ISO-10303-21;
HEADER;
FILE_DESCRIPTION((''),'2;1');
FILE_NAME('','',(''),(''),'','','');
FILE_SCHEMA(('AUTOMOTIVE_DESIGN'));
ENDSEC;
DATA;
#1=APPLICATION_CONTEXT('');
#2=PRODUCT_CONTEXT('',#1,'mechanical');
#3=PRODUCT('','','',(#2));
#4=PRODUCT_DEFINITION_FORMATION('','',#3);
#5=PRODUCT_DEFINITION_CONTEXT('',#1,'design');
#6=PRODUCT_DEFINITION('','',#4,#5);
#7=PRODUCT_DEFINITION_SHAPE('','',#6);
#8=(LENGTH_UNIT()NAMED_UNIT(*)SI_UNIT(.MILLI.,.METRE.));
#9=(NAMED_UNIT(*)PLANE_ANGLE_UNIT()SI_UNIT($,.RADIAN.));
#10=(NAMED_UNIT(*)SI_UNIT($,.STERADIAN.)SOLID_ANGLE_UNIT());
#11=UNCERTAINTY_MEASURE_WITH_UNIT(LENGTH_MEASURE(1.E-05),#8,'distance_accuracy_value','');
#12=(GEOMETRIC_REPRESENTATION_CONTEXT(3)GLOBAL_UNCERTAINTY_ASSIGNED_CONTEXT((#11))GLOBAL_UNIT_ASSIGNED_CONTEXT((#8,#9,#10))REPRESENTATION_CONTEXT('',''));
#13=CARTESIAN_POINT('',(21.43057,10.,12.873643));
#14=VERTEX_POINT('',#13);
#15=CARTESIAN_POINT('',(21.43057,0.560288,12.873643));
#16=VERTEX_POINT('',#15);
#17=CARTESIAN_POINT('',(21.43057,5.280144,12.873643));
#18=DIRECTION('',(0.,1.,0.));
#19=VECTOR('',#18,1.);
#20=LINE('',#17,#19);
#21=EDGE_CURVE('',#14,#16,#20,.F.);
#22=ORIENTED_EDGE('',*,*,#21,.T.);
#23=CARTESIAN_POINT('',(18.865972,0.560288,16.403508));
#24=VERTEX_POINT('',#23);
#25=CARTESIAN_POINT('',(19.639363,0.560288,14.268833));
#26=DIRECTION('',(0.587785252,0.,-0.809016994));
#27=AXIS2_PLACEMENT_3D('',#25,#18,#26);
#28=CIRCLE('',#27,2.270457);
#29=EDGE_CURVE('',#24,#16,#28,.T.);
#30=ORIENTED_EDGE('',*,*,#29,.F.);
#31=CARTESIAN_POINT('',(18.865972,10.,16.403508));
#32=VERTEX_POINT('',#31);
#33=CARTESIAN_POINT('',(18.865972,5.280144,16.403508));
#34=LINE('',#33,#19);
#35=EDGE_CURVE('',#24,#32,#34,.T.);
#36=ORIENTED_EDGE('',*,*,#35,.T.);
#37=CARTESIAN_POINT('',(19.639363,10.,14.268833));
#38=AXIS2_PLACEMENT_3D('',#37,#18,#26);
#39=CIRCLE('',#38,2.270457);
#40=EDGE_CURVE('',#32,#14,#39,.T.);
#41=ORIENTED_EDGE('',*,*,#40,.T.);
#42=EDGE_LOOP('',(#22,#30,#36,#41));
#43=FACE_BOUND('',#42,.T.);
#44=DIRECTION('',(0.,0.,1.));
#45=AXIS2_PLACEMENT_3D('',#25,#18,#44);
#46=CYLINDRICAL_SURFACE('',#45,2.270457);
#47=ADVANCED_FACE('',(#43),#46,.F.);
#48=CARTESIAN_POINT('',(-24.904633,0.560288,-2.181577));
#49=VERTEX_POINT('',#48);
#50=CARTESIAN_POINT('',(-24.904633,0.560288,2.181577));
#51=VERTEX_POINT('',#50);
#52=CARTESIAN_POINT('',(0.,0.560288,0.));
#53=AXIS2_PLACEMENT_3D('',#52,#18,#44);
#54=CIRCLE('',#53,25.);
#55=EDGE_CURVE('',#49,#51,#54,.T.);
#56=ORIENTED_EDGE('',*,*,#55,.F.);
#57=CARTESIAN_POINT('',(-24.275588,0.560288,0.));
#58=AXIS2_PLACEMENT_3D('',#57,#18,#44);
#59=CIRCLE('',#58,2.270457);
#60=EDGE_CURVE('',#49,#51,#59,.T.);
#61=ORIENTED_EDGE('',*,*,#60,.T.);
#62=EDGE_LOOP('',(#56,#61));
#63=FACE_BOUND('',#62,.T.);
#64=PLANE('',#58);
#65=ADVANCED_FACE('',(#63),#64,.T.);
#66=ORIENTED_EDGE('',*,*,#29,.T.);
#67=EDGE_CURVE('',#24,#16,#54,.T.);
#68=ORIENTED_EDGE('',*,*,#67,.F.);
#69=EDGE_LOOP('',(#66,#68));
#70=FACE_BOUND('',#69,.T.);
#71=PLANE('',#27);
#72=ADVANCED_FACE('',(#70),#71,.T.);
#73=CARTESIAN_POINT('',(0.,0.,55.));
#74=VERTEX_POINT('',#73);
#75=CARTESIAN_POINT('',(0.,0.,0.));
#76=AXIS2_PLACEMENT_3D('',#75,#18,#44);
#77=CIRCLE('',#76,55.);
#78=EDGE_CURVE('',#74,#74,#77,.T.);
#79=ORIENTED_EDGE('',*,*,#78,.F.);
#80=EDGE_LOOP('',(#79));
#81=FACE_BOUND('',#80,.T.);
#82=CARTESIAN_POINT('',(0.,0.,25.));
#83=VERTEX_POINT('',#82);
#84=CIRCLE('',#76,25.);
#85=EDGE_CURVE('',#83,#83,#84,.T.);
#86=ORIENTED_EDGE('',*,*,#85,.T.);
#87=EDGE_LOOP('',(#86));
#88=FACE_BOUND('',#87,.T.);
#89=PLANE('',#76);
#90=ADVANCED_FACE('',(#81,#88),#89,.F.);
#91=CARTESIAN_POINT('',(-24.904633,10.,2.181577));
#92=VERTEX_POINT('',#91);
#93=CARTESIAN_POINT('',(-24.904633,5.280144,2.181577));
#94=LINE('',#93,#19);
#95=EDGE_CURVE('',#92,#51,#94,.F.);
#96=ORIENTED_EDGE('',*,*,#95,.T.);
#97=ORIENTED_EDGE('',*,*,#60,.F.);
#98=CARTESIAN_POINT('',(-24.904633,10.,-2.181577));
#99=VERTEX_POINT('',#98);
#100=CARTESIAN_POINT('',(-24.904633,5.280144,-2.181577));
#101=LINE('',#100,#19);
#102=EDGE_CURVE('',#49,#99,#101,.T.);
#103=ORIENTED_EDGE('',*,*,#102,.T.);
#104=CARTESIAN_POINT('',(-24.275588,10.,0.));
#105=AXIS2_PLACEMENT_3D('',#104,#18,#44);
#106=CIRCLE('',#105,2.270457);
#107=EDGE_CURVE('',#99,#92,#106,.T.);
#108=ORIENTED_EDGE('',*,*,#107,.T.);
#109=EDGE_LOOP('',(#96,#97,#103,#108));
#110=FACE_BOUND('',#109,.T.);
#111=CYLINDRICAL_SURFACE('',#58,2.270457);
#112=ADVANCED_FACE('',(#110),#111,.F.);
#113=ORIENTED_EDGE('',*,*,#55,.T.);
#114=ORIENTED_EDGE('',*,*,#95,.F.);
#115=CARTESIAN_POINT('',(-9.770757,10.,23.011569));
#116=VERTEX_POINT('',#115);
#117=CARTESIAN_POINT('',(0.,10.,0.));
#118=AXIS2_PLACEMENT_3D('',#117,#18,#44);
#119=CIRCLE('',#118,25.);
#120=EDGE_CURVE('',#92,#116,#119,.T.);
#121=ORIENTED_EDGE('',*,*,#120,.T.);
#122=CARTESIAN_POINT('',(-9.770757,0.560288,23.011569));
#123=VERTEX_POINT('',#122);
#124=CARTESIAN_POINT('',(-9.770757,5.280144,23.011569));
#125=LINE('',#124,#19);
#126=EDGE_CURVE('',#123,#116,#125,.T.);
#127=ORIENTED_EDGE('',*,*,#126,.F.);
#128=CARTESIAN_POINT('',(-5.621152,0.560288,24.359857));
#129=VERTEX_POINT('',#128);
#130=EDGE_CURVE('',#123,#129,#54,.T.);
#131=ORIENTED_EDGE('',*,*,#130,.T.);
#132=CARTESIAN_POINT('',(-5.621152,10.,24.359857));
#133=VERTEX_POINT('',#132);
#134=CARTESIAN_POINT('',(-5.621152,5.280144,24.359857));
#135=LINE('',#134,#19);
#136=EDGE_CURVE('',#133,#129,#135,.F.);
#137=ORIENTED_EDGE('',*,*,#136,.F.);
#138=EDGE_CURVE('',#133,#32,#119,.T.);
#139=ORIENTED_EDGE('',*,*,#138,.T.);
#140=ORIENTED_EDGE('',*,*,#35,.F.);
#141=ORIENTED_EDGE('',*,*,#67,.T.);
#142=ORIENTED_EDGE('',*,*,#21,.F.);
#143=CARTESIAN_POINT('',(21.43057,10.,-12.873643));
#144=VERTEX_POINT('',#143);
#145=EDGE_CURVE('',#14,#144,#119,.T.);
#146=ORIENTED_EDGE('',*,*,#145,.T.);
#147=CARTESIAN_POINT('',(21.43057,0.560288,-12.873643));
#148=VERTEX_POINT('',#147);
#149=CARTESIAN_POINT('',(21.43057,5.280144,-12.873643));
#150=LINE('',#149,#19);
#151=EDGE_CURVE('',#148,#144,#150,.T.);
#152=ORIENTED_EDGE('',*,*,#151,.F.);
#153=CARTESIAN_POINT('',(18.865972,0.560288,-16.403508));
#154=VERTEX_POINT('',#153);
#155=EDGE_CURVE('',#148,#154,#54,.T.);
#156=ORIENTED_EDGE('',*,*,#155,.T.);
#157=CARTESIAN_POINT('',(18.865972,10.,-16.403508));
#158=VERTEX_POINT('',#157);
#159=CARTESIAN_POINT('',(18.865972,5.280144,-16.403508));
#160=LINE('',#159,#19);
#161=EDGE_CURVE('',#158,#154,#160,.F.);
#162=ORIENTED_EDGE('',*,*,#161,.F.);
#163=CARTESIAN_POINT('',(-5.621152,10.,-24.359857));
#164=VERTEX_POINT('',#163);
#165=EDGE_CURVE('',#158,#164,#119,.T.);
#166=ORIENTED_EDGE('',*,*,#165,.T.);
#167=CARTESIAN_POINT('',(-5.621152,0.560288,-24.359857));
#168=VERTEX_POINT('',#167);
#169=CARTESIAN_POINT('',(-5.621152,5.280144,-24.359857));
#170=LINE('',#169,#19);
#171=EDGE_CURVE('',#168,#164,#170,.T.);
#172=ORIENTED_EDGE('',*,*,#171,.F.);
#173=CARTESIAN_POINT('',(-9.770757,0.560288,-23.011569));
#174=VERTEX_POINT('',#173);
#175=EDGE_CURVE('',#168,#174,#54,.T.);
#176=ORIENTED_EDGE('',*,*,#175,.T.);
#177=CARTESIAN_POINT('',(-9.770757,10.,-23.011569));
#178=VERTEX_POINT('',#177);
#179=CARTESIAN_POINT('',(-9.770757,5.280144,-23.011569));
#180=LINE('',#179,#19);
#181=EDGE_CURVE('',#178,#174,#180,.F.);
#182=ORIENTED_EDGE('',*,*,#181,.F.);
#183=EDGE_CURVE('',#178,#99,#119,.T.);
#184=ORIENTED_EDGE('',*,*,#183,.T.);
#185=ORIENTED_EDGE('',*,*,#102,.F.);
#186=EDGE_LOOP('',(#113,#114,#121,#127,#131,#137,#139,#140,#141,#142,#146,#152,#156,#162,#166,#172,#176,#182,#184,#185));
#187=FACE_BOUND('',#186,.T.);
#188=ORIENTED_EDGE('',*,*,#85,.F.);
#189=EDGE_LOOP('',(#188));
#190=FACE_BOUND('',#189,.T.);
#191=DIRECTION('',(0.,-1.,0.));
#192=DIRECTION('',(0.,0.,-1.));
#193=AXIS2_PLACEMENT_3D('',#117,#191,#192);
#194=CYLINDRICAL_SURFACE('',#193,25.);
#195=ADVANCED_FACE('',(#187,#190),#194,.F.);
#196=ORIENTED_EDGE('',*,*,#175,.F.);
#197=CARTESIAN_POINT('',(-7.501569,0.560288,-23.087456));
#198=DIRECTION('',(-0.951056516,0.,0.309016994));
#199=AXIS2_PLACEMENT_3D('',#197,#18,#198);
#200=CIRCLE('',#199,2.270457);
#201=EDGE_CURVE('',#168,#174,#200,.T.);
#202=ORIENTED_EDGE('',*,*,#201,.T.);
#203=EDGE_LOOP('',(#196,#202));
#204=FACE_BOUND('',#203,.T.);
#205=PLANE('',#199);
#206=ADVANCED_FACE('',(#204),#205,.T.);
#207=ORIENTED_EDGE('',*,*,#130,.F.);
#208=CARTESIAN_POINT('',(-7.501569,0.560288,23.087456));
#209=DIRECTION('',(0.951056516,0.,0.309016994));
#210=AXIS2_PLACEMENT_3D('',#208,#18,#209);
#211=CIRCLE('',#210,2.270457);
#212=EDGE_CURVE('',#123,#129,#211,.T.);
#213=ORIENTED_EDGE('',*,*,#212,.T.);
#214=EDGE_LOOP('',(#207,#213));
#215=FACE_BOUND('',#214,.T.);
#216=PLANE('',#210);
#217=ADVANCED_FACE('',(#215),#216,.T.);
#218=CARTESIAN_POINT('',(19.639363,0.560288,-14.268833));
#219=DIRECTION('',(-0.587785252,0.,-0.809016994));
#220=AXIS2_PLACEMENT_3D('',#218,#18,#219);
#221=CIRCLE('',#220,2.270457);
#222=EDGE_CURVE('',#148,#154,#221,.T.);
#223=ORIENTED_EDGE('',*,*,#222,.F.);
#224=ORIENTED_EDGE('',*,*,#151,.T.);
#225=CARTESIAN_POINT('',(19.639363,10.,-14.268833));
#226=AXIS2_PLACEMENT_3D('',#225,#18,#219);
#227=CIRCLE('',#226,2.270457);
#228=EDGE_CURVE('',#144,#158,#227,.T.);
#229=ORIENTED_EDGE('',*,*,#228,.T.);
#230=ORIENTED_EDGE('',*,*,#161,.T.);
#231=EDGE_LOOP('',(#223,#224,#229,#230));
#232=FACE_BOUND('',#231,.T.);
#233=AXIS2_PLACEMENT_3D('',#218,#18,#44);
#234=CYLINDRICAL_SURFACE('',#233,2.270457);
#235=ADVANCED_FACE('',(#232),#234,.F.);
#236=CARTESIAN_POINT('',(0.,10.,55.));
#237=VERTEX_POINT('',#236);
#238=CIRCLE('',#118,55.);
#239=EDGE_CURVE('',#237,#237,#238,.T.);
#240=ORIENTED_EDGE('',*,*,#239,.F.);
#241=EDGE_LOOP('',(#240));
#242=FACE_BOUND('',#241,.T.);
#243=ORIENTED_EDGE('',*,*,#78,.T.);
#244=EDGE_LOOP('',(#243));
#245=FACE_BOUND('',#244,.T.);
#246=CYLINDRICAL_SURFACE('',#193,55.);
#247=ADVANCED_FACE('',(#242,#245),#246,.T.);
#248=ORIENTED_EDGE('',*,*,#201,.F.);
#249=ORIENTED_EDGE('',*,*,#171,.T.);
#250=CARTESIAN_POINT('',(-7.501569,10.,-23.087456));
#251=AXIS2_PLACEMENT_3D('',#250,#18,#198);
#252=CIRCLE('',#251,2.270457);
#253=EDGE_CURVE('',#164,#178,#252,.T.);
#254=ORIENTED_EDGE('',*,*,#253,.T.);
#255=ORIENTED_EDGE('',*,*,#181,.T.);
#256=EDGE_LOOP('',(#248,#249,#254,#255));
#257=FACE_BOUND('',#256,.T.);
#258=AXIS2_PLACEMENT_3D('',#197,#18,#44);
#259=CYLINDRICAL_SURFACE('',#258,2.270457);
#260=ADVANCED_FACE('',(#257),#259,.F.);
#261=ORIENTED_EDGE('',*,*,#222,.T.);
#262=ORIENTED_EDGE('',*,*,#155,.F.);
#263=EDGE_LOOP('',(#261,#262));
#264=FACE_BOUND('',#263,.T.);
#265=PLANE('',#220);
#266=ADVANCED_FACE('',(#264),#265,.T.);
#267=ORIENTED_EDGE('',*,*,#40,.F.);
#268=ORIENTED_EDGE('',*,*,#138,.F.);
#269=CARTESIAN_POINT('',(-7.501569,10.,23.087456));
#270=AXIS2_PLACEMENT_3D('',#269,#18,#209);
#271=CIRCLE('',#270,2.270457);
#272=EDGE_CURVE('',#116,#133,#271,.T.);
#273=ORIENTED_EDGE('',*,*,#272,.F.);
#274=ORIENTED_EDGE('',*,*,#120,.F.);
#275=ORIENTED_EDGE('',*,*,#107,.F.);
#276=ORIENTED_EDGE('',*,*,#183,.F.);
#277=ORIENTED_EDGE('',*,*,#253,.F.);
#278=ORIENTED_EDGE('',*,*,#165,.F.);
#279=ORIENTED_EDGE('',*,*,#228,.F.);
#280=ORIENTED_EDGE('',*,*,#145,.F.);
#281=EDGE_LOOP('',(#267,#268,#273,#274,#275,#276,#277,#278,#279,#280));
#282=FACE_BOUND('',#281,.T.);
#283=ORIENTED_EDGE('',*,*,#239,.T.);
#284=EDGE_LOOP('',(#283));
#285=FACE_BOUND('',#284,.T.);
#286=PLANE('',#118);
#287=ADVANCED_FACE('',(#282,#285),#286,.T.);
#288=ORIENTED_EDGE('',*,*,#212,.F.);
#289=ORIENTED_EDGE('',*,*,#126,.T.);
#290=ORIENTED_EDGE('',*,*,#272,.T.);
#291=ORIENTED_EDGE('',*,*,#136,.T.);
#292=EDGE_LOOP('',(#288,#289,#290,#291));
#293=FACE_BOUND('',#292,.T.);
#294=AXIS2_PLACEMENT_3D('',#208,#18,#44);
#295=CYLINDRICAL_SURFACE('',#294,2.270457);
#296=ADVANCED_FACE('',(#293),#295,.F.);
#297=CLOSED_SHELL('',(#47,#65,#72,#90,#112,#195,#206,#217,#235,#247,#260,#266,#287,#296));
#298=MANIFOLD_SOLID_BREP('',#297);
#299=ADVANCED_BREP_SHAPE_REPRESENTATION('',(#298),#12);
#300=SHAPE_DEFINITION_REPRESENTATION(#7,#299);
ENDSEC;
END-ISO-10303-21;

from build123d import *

# Parameters (mm, degrees)
SKETCH1_R           = 55
BOSS_EXTRUDE1_DEPTH = 10
SKETCH2_R           = 25
CUT_EXTRUDE1_DEPTH  = 79.421935707
SKETCH3_R           = 2.270456578
CUT_EXTRUDE2_DEPTH  = 9.439711788
CIRPATTERN1_COUNT   = 5


with BuildPart() as part:
    # Sketch1 → Boss-Extrude1 (new body)
    with BuildSketch(Plane(origin=(0, 0, 0), x_dir=(1, 0, 0), z_dir=(0, 1, 0))):
        Circle(SKETCH1_R)
    extrude(amount=BOSS_EXTRUDE1_DEPTH)

    # Sketch2 → Cut-Extrude1 (cut, through all)
    with BuildSketch(Plane(origin=(0, 0, 0), x_dir=(1, 0, 0), z_dir=(0, 1, 0))):
        Circle(SKETCH2_R)
    extrude(amount=CUT_EXTRUDE1_DEPTH, mode=Mode.SUBTRACT)

    # Sketch3 → Cut-Extrude2 (cut)
    with BuildSketch(Plane(origin=(0, 10, 0), x_dir=(1, 0, 0), z_dir=(0, 1, 0))):
        with Locations((-24.275588231, 0)):
            Circle(SKETCH3_R)
    cut_extrude2 = extrude(amount=-CUT_EXTRUDE2_DEPTH, mode=Mode.SUBTRACT)

    # CirPattern1: Cut-Extrude2 ×5 about axis
    cirpattern1_axis = Axis((0, 0, 0), (0, 1, 0))
    for i in range(1, CIRPATTERN1_COUNT):
        add(cut_extrude2.rotate(cirpattern1_axis, i * 360 / CIRPATTERN1_COUNT), mode=Mode.SUBTRACT)


solid = part.part
